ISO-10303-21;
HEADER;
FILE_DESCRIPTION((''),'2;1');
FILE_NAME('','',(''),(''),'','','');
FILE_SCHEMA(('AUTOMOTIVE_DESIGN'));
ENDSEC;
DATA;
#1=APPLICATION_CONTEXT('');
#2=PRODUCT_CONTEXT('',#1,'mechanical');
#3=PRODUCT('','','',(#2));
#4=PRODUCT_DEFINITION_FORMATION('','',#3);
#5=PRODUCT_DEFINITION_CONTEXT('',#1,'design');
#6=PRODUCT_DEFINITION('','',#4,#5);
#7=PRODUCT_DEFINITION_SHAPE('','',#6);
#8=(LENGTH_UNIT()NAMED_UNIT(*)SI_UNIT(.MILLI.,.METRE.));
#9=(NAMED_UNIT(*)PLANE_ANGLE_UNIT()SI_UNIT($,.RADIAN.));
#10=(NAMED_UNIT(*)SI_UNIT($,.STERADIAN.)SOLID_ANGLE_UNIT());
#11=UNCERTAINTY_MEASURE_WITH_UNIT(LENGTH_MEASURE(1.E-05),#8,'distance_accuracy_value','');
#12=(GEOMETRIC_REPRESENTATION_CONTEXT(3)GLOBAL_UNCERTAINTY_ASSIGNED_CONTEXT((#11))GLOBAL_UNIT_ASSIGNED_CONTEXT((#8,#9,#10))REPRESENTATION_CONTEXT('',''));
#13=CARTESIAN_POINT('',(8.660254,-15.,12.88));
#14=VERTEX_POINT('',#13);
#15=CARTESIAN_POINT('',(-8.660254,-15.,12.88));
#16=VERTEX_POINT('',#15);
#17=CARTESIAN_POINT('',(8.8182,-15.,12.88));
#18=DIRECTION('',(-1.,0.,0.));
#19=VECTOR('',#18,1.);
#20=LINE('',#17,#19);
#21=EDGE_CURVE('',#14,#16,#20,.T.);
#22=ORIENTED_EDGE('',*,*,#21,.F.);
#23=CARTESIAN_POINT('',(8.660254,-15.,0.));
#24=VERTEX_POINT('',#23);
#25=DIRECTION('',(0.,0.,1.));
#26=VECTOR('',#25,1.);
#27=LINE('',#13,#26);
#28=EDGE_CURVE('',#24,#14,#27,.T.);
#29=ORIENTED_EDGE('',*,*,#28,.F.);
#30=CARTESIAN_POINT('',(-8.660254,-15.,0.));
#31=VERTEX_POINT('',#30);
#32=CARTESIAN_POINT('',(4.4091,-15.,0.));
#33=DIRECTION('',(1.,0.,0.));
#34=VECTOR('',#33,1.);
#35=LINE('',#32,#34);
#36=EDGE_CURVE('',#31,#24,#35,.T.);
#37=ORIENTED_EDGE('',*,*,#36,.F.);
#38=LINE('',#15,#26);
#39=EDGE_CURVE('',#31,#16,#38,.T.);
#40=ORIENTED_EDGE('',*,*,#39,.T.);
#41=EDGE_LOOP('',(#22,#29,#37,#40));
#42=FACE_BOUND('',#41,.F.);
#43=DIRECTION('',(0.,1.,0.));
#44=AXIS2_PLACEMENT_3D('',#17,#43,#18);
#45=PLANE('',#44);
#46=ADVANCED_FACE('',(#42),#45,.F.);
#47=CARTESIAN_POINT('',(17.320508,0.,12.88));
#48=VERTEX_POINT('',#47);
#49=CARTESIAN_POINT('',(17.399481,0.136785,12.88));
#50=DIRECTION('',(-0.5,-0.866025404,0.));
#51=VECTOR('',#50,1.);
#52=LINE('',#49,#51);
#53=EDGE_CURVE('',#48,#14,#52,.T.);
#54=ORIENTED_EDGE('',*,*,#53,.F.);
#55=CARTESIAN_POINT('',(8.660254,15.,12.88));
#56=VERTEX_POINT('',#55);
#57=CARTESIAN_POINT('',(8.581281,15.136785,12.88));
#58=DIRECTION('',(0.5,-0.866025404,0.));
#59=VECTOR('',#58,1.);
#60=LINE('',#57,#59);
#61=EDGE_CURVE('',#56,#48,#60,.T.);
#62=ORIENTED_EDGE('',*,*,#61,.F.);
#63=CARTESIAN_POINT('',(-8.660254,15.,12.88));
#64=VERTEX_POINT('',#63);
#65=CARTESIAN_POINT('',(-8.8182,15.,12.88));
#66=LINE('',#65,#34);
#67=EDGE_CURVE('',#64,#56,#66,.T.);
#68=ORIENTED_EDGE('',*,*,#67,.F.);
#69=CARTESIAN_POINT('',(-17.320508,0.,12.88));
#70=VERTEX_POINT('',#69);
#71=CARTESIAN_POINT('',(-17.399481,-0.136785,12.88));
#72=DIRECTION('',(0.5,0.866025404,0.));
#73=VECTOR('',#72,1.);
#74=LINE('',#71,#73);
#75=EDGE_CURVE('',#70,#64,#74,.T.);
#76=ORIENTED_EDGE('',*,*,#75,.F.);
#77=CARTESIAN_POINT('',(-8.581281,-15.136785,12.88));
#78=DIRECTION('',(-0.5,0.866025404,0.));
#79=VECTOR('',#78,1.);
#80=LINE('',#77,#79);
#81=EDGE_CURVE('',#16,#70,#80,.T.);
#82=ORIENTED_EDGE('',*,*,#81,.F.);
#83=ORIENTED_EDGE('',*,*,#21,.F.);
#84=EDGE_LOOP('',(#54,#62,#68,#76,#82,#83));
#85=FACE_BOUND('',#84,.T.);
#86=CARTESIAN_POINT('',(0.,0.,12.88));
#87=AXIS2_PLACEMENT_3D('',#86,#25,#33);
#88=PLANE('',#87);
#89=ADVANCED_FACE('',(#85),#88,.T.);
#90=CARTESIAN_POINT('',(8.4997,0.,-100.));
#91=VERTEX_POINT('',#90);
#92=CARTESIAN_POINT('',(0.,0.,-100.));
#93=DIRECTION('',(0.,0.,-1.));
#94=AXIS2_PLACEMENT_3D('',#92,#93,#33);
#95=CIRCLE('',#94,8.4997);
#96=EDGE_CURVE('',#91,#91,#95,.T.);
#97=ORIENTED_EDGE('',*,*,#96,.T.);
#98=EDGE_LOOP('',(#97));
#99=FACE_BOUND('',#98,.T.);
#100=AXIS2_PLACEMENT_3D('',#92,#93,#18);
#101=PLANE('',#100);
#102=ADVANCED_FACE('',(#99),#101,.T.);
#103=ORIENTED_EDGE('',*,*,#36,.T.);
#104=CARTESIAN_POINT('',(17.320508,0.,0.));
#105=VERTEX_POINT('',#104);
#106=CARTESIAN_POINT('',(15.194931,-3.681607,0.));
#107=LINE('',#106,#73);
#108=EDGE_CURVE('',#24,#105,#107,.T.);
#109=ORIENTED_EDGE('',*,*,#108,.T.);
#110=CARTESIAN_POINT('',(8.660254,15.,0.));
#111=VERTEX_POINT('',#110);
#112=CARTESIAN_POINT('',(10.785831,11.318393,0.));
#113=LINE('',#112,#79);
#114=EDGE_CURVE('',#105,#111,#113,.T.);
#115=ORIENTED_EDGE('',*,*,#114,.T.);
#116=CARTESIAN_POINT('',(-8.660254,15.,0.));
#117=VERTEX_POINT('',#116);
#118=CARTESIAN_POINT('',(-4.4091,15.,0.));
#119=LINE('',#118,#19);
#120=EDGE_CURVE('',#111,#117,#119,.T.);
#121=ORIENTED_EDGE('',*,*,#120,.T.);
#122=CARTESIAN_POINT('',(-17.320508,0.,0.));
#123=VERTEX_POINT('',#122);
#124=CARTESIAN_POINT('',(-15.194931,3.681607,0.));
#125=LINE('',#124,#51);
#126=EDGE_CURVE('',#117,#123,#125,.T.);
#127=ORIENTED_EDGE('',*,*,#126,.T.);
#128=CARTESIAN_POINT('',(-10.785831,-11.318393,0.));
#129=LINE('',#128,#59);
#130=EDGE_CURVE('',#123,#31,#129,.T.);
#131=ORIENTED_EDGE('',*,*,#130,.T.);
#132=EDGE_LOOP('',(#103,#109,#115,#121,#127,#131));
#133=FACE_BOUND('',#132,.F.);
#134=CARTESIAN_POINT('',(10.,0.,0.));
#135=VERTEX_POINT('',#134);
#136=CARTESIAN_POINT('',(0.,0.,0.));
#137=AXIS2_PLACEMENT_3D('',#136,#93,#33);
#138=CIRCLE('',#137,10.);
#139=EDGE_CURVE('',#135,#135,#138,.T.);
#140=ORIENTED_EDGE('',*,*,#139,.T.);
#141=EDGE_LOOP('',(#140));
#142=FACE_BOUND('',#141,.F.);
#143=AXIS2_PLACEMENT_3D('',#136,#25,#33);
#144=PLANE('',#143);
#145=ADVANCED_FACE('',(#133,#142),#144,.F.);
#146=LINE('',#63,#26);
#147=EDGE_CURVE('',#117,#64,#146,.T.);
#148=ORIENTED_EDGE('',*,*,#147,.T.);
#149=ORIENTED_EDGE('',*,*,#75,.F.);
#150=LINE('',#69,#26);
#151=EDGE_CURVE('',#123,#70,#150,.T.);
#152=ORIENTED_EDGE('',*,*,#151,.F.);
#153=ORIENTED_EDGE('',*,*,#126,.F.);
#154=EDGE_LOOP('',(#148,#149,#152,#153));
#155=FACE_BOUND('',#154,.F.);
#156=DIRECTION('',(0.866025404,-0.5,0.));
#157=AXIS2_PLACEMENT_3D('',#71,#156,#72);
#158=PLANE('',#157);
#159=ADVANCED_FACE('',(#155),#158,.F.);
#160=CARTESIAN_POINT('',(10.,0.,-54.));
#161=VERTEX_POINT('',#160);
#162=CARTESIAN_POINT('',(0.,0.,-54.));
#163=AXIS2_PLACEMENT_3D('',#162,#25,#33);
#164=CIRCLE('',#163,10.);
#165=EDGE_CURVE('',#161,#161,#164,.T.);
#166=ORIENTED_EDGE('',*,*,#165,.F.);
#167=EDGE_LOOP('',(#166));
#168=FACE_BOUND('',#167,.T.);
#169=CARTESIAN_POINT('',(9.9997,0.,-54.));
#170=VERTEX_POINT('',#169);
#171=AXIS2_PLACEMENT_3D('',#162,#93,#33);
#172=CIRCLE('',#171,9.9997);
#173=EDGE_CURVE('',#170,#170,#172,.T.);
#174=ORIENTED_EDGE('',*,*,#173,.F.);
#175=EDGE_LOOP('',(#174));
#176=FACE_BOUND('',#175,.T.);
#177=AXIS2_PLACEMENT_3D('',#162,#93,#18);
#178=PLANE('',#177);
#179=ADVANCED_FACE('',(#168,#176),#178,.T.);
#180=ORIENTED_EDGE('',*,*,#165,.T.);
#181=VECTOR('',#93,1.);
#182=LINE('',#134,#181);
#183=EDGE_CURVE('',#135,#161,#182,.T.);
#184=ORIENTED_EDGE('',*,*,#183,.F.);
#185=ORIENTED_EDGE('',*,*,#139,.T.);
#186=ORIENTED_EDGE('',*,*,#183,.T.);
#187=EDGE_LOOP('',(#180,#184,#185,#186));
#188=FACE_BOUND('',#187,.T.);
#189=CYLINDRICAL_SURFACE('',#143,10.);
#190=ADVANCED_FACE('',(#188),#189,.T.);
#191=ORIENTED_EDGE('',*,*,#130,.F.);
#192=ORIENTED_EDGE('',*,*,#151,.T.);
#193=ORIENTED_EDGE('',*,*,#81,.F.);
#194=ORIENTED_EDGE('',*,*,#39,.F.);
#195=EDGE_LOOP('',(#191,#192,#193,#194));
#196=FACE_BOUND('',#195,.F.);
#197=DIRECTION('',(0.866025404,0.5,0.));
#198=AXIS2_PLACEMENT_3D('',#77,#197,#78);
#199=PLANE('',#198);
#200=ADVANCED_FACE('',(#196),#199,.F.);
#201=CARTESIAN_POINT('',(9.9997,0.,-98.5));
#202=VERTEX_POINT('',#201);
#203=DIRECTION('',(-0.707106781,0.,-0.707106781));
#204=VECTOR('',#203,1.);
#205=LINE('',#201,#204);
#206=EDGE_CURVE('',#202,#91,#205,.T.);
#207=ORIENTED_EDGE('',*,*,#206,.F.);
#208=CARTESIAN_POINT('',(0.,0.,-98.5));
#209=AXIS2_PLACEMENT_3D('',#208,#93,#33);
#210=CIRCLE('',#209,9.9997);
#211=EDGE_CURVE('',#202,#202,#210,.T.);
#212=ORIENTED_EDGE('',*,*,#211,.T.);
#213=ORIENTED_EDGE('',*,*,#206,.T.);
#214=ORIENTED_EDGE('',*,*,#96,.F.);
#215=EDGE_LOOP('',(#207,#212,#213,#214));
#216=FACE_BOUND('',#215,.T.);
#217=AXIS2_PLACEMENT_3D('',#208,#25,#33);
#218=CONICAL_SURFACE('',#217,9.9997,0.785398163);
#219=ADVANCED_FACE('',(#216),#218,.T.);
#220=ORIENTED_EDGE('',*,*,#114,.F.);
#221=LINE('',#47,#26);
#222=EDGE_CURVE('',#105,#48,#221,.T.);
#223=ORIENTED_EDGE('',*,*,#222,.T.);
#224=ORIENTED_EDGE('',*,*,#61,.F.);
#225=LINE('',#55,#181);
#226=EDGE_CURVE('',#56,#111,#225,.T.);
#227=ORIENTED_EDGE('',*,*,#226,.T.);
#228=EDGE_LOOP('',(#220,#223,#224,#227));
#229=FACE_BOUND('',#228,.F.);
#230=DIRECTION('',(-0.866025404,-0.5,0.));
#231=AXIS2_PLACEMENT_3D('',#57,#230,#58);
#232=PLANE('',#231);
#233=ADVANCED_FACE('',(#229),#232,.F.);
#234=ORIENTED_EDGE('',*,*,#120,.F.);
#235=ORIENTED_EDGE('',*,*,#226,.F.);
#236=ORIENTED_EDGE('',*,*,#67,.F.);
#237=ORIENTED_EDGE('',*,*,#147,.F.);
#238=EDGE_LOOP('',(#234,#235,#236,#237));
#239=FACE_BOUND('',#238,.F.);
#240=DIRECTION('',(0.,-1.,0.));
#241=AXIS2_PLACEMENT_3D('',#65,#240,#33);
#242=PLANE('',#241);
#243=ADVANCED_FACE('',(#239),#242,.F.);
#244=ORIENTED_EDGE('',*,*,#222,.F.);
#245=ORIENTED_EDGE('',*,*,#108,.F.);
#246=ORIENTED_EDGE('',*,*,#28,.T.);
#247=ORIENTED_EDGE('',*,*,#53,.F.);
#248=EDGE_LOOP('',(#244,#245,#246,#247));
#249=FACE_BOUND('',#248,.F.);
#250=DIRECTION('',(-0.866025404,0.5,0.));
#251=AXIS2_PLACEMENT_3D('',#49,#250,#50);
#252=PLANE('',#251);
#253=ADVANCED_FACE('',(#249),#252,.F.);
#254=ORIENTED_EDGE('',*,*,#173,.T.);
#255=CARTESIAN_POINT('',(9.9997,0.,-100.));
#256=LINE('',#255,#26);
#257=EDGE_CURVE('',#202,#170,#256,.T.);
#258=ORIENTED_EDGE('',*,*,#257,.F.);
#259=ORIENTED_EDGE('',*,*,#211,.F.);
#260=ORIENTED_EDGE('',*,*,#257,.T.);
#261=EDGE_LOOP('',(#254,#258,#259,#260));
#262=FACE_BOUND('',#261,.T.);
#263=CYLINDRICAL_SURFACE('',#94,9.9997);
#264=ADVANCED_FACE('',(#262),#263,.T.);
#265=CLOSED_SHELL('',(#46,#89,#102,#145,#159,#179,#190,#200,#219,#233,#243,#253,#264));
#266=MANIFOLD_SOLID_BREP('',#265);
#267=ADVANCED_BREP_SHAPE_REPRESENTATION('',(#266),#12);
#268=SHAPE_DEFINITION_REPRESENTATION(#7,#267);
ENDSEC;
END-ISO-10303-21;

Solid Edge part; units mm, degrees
sketch "Sketch1" plane through (0, 0, 0) normal (0, 0, 1) x (1, 0, 0)
  circle A0 centre (0, 0) radius 17.4
  dimension "D1" = 34.8
extrude "Protrusion1" add sketch "Sketch1" along normal blind 12.88
sketch "Sketch2" plane through (0, 0, 0) normal (0, 0, -1) x (1, 0, 0)
  circle A0 centre (0, 0) radius 10
extrude "Protrusion2" add sketch "Sketch2" along normal blind 100
sketch "Sketch3" plane through (0, 0, -100) normal (0, 0, -1) x (1, 0, 0)
  circle A0 centre (0, 0) radius 9.9997
extrude "Cutout1" cut sketch "Sketch3" against normal blind 46 flip side to cut
chamfer "Chamfer_1" distance 1.5 angle 45 1 edges at (-9.9997, 0, -100)
sketch "Sketch4" plane through (0, 0, 12.88) normal (0, 0, 1) x (1, 0, 0)
  line L0 (-8.8182, 15) -> (8.8182, 15)
  dimension "D1" = 30
extrude "Cutout2" cut sketch "Sketch4" against normal up to next material side at (0, 15.05, 12.88)
pattern_circular "Pattern1" count 6 over 360 about axis through (0, 0, 12.88) along (0, 0, 1) of "Cutout2"
properties part number "24104656"
